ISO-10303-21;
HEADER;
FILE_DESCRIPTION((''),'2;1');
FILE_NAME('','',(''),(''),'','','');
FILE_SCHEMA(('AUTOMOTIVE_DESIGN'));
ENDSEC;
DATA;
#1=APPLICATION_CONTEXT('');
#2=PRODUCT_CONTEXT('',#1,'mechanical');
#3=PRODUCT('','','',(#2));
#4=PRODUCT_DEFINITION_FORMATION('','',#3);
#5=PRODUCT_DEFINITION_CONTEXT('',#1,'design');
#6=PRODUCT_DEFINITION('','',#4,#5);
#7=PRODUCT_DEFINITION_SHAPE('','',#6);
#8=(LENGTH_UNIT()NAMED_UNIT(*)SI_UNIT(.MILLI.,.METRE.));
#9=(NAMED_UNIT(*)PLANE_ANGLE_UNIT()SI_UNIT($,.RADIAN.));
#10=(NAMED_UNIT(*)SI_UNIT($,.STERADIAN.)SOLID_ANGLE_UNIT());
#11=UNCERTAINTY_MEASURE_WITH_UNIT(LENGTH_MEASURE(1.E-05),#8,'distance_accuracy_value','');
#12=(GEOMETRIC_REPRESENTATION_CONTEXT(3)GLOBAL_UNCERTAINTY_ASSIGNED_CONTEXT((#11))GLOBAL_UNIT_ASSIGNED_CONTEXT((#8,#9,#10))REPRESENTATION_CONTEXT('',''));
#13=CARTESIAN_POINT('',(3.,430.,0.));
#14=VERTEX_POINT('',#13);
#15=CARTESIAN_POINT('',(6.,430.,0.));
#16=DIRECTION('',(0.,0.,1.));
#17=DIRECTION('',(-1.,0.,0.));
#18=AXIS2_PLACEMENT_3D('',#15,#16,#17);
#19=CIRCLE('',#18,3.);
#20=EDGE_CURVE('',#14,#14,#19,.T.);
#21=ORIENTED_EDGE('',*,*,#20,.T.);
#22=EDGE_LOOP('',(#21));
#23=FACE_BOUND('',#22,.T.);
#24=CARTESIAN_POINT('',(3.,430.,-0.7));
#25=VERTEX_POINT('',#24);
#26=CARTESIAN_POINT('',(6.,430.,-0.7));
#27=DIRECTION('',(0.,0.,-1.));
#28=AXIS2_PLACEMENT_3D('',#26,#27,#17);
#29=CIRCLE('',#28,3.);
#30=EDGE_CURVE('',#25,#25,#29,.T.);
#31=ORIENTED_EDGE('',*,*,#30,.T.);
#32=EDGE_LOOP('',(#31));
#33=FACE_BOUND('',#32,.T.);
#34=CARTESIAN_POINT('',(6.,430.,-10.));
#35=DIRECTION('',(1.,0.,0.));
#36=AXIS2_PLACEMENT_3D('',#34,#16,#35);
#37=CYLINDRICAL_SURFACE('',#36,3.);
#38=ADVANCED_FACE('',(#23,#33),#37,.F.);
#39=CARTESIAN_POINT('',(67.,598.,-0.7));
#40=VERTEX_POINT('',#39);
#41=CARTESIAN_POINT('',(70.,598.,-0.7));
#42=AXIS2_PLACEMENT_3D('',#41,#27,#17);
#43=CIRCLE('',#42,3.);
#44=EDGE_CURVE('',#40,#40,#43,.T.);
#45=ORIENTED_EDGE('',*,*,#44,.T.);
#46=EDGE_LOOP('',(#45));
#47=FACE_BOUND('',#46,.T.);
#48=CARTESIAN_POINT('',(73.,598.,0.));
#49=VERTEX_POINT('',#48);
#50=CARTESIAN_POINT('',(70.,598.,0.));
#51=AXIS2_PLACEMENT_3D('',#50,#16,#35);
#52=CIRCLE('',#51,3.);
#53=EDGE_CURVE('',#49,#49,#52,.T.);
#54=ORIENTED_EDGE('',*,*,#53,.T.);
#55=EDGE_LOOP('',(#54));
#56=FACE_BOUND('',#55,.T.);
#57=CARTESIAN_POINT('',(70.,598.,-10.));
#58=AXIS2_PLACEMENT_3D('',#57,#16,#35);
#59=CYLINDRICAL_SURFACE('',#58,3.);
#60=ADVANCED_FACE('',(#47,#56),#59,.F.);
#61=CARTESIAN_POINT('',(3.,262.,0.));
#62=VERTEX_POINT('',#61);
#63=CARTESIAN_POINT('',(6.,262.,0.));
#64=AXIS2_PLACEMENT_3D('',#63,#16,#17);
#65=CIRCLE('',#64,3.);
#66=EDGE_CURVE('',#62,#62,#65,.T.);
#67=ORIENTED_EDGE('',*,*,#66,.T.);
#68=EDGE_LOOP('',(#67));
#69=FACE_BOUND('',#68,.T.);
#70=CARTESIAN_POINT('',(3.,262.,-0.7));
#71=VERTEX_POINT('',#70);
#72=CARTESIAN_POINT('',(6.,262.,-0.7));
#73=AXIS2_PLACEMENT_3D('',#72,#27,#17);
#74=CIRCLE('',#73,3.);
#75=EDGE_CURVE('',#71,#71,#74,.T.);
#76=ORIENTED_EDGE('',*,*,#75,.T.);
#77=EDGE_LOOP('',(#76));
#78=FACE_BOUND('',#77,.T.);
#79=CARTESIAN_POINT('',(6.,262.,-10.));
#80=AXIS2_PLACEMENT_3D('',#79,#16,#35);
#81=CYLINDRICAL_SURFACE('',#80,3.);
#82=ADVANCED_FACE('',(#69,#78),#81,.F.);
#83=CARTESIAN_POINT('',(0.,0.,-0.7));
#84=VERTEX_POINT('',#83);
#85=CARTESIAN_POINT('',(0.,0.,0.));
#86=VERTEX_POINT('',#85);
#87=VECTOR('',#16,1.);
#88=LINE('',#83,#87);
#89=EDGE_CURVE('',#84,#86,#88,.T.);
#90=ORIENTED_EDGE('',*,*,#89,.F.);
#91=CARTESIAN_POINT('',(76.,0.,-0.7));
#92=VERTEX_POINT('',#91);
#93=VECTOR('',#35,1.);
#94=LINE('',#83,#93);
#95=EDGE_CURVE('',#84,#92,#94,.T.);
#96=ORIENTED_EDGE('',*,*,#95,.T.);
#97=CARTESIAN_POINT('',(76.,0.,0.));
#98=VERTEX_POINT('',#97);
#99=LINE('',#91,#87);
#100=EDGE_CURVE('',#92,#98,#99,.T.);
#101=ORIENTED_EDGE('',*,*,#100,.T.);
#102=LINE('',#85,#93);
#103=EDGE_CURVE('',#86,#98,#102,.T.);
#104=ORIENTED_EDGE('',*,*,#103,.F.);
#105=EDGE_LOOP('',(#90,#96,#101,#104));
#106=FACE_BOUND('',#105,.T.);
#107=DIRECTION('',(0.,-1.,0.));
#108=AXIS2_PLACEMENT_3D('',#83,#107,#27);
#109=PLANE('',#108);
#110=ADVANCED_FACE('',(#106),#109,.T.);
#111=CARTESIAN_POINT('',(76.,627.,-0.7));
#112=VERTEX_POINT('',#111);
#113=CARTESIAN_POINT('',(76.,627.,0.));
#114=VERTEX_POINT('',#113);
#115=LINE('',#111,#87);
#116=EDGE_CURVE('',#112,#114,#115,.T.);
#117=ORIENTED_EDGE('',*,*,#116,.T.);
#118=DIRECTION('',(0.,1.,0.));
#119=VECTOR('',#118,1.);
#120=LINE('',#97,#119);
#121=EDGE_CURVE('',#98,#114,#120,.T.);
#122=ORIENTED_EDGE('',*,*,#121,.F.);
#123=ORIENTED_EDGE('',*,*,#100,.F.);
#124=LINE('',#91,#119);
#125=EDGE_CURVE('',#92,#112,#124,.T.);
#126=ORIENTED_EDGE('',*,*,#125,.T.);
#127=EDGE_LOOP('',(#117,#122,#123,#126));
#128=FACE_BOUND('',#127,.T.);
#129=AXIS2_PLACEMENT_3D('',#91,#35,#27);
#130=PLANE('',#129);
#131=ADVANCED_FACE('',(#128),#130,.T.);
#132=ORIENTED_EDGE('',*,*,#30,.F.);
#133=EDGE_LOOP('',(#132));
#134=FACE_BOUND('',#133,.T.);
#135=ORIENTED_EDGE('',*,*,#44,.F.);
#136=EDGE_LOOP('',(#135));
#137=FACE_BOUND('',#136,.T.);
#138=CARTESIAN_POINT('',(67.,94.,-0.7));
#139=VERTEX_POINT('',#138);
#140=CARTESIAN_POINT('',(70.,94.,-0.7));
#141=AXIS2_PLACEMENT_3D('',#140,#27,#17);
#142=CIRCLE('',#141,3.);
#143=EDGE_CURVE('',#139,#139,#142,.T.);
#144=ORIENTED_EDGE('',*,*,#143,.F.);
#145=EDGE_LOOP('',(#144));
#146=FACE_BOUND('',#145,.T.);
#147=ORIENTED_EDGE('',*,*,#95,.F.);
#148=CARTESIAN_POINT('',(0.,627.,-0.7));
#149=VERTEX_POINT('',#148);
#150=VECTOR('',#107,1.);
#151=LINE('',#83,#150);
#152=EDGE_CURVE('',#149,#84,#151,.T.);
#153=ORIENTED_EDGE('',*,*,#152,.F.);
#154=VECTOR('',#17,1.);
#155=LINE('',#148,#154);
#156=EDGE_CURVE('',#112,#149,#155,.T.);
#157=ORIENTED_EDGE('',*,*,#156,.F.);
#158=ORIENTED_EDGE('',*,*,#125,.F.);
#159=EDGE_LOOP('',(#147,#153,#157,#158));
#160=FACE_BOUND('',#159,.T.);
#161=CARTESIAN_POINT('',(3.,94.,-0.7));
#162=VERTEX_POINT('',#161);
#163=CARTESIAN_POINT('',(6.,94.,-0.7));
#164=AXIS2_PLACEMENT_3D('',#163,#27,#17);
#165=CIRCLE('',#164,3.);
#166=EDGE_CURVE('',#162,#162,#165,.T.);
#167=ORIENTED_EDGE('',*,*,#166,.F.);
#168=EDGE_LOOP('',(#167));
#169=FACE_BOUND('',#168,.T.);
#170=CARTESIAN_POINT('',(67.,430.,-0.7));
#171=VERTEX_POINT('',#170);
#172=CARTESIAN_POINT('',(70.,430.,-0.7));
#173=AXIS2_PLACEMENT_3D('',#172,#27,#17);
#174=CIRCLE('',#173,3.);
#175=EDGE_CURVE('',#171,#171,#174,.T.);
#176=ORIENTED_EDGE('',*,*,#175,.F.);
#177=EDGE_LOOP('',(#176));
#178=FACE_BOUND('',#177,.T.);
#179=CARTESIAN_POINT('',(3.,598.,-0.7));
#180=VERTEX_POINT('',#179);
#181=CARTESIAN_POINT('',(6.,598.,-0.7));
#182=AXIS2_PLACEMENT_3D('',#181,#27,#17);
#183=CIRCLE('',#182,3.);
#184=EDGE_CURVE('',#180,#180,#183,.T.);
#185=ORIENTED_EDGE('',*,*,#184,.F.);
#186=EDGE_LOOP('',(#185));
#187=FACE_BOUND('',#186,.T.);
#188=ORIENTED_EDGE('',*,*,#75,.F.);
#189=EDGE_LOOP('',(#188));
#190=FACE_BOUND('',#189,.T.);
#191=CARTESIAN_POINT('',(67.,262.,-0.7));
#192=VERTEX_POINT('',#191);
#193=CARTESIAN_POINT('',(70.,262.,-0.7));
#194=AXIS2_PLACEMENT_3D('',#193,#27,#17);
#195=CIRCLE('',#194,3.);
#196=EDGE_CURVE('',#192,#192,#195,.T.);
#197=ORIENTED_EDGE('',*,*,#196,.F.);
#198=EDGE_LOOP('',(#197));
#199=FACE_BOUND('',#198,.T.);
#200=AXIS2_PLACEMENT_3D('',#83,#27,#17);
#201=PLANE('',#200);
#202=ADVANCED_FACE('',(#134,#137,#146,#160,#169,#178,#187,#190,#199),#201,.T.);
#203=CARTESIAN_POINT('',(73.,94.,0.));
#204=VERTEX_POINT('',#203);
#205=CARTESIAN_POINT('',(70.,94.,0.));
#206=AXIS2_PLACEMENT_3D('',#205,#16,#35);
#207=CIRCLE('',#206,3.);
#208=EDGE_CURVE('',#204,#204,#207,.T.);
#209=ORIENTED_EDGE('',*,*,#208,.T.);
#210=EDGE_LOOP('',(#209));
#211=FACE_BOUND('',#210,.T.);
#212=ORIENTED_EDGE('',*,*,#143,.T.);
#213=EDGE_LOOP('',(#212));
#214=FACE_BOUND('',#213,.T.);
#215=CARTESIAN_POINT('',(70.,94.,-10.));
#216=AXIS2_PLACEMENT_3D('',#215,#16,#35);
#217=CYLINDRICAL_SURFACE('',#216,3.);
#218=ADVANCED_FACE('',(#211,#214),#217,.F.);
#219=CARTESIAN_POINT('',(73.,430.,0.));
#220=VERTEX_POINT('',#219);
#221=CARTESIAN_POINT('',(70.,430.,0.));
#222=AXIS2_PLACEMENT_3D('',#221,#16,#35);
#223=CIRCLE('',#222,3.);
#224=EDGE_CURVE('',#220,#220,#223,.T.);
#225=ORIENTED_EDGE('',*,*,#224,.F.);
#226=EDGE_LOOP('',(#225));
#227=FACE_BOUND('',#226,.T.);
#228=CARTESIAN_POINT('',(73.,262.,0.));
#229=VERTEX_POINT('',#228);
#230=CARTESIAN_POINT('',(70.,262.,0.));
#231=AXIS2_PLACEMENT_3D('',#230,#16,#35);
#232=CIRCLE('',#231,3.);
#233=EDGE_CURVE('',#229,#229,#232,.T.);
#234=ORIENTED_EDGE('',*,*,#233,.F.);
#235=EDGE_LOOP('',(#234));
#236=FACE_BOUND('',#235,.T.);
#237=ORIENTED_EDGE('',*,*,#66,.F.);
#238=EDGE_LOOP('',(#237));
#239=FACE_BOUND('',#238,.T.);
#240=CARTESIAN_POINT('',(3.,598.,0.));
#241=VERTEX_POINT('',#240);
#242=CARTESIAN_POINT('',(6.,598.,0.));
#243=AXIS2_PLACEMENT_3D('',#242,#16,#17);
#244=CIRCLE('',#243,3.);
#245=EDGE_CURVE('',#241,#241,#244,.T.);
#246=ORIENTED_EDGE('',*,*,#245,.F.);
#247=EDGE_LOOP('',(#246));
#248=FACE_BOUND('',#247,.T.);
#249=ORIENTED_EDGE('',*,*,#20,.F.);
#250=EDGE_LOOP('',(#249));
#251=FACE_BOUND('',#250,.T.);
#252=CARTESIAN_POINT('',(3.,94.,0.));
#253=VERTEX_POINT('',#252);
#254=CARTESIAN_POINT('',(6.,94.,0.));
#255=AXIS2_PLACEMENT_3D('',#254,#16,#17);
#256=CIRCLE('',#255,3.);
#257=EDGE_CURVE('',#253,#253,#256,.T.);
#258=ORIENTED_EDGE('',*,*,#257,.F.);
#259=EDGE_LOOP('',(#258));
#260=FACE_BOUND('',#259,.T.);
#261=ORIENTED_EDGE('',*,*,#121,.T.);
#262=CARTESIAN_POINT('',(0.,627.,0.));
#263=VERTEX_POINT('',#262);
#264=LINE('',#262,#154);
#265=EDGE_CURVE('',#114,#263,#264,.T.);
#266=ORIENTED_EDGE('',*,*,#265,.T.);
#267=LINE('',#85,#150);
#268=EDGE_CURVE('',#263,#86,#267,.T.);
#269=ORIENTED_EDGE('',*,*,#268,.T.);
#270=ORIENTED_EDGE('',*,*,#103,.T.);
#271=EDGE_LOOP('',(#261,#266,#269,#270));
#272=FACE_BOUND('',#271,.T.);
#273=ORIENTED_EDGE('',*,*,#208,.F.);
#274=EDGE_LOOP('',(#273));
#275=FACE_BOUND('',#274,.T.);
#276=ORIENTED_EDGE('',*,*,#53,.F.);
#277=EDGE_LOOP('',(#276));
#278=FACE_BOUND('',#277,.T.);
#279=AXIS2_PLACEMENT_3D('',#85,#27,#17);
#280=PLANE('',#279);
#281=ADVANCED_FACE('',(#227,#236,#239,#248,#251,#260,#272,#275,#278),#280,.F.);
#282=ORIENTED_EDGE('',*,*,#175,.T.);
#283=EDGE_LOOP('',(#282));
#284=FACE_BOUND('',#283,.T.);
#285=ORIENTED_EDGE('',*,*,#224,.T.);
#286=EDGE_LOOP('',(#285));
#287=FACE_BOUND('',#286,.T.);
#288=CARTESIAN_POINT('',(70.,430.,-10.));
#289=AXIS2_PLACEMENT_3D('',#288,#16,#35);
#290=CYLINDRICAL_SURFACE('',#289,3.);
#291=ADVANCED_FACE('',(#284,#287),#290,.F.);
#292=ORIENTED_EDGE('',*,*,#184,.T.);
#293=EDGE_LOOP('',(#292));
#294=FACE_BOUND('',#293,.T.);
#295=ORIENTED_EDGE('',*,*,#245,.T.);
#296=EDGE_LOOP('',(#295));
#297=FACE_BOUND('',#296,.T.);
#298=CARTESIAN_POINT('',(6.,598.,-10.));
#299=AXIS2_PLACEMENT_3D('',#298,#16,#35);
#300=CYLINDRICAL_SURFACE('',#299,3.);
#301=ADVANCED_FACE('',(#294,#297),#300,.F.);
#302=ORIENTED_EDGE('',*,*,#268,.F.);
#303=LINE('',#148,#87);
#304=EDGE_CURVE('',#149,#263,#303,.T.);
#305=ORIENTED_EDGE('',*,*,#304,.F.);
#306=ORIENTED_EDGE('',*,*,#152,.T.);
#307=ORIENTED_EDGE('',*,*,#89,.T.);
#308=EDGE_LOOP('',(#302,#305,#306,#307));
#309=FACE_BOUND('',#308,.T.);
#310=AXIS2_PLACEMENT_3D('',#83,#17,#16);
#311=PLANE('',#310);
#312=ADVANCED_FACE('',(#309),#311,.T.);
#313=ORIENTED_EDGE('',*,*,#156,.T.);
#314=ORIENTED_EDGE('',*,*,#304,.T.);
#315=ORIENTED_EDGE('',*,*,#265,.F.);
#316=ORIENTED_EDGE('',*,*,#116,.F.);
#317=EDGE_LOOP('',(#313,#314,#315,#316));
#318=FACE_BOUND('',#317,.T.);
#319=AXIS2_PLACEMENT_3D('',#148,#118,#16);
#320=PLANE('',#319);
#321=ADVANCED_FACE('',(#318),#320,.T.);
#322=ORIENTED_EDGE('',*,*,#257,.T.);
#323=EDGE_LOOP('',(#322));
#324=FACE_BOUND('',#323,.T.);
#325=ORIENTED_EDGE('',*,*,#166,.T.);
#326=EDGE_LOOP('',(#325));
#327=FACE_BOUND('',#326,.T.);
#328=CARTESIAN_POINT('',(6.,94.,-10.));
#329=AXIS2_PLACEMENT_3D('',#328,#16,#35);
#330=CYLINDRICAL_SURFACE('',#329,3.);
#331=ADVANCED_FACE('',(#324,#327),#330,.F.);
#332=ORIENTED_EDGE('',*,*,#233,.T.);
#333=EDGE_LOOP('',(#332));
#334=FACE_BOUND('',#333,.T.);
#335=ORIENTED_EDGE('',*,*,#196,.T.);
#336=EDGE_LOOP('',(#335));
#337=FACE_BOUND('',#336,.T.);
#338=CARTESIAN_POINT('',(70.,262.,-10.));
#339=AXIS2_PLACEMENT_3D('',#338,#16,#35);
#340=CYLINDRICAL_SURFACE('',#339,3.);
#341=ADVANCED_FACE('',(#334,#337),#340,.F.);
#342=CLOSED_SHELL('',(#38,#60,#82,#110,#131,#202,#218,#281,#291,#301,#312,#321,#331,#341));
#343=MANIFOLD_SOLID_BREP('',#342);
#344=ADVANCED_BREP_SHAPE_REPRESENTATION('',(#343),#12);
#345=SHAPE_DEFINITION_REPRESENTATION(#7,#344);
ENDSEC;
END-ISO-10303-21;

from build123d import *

# Parameters (mm, degrees)
SKETCH1_W          = 76
SKETCH1_H          = 627
BASE_FLANGE1_DEPTH = 0.7
SKETCH2_R          = 3
CUT_EXTRUDE1_DEPTH = 10


# Sheet-metal steps are written as plain solids
with BuildPart() as part:
    # Sketch1 → Base-Flange1 (new body)
    with BuildSketch(Plane.XY):
        with Locations((38, 313.5)):
            Rectangle(SKETCH1_W, SKETCH1_H)
    extrude(amount=-BASE_FLANGE1_DEPTH)

    # Sketch2 → Cut-Extrude1 (cut)
    with BuildSketch(Plane.XY):
        with Locations((70, 598)):
            Circle(SKETCH2_R)
        with Locations((70, 430)):
            Circle(SKETCH2_R)
        with Locations((70, 262)):
            Circle(SKETCH2_R)
        with Locations((70, 94)):
            Circle(SKETCH2_R)
        with Locations((70, -74)):
            Circle(SKETCH2_R)
        with Locations((6, -74)):
            Circle(SKETCH2_R)
        with Locations(Location((6, 94, 0), (0, 0, 180))):
            Circle(SKETCH2_R)
        with Locations(Location((6, 262, 0), (0, 0, 180))):
            Circle(SKETCH2_R)
        with Locations(Location((6, 430, 0), (0, 0, 180))):
            Circle(SKETCH2_R)
        with Locations(Location((6, 598, 0), (0, 0, 180))):
            Circle(SKETCH2_R)
    extrude(amount=-CUT_EXTRUDE1_DEPTH, mode=Mode.SUBTRACT)


solid = part.part
